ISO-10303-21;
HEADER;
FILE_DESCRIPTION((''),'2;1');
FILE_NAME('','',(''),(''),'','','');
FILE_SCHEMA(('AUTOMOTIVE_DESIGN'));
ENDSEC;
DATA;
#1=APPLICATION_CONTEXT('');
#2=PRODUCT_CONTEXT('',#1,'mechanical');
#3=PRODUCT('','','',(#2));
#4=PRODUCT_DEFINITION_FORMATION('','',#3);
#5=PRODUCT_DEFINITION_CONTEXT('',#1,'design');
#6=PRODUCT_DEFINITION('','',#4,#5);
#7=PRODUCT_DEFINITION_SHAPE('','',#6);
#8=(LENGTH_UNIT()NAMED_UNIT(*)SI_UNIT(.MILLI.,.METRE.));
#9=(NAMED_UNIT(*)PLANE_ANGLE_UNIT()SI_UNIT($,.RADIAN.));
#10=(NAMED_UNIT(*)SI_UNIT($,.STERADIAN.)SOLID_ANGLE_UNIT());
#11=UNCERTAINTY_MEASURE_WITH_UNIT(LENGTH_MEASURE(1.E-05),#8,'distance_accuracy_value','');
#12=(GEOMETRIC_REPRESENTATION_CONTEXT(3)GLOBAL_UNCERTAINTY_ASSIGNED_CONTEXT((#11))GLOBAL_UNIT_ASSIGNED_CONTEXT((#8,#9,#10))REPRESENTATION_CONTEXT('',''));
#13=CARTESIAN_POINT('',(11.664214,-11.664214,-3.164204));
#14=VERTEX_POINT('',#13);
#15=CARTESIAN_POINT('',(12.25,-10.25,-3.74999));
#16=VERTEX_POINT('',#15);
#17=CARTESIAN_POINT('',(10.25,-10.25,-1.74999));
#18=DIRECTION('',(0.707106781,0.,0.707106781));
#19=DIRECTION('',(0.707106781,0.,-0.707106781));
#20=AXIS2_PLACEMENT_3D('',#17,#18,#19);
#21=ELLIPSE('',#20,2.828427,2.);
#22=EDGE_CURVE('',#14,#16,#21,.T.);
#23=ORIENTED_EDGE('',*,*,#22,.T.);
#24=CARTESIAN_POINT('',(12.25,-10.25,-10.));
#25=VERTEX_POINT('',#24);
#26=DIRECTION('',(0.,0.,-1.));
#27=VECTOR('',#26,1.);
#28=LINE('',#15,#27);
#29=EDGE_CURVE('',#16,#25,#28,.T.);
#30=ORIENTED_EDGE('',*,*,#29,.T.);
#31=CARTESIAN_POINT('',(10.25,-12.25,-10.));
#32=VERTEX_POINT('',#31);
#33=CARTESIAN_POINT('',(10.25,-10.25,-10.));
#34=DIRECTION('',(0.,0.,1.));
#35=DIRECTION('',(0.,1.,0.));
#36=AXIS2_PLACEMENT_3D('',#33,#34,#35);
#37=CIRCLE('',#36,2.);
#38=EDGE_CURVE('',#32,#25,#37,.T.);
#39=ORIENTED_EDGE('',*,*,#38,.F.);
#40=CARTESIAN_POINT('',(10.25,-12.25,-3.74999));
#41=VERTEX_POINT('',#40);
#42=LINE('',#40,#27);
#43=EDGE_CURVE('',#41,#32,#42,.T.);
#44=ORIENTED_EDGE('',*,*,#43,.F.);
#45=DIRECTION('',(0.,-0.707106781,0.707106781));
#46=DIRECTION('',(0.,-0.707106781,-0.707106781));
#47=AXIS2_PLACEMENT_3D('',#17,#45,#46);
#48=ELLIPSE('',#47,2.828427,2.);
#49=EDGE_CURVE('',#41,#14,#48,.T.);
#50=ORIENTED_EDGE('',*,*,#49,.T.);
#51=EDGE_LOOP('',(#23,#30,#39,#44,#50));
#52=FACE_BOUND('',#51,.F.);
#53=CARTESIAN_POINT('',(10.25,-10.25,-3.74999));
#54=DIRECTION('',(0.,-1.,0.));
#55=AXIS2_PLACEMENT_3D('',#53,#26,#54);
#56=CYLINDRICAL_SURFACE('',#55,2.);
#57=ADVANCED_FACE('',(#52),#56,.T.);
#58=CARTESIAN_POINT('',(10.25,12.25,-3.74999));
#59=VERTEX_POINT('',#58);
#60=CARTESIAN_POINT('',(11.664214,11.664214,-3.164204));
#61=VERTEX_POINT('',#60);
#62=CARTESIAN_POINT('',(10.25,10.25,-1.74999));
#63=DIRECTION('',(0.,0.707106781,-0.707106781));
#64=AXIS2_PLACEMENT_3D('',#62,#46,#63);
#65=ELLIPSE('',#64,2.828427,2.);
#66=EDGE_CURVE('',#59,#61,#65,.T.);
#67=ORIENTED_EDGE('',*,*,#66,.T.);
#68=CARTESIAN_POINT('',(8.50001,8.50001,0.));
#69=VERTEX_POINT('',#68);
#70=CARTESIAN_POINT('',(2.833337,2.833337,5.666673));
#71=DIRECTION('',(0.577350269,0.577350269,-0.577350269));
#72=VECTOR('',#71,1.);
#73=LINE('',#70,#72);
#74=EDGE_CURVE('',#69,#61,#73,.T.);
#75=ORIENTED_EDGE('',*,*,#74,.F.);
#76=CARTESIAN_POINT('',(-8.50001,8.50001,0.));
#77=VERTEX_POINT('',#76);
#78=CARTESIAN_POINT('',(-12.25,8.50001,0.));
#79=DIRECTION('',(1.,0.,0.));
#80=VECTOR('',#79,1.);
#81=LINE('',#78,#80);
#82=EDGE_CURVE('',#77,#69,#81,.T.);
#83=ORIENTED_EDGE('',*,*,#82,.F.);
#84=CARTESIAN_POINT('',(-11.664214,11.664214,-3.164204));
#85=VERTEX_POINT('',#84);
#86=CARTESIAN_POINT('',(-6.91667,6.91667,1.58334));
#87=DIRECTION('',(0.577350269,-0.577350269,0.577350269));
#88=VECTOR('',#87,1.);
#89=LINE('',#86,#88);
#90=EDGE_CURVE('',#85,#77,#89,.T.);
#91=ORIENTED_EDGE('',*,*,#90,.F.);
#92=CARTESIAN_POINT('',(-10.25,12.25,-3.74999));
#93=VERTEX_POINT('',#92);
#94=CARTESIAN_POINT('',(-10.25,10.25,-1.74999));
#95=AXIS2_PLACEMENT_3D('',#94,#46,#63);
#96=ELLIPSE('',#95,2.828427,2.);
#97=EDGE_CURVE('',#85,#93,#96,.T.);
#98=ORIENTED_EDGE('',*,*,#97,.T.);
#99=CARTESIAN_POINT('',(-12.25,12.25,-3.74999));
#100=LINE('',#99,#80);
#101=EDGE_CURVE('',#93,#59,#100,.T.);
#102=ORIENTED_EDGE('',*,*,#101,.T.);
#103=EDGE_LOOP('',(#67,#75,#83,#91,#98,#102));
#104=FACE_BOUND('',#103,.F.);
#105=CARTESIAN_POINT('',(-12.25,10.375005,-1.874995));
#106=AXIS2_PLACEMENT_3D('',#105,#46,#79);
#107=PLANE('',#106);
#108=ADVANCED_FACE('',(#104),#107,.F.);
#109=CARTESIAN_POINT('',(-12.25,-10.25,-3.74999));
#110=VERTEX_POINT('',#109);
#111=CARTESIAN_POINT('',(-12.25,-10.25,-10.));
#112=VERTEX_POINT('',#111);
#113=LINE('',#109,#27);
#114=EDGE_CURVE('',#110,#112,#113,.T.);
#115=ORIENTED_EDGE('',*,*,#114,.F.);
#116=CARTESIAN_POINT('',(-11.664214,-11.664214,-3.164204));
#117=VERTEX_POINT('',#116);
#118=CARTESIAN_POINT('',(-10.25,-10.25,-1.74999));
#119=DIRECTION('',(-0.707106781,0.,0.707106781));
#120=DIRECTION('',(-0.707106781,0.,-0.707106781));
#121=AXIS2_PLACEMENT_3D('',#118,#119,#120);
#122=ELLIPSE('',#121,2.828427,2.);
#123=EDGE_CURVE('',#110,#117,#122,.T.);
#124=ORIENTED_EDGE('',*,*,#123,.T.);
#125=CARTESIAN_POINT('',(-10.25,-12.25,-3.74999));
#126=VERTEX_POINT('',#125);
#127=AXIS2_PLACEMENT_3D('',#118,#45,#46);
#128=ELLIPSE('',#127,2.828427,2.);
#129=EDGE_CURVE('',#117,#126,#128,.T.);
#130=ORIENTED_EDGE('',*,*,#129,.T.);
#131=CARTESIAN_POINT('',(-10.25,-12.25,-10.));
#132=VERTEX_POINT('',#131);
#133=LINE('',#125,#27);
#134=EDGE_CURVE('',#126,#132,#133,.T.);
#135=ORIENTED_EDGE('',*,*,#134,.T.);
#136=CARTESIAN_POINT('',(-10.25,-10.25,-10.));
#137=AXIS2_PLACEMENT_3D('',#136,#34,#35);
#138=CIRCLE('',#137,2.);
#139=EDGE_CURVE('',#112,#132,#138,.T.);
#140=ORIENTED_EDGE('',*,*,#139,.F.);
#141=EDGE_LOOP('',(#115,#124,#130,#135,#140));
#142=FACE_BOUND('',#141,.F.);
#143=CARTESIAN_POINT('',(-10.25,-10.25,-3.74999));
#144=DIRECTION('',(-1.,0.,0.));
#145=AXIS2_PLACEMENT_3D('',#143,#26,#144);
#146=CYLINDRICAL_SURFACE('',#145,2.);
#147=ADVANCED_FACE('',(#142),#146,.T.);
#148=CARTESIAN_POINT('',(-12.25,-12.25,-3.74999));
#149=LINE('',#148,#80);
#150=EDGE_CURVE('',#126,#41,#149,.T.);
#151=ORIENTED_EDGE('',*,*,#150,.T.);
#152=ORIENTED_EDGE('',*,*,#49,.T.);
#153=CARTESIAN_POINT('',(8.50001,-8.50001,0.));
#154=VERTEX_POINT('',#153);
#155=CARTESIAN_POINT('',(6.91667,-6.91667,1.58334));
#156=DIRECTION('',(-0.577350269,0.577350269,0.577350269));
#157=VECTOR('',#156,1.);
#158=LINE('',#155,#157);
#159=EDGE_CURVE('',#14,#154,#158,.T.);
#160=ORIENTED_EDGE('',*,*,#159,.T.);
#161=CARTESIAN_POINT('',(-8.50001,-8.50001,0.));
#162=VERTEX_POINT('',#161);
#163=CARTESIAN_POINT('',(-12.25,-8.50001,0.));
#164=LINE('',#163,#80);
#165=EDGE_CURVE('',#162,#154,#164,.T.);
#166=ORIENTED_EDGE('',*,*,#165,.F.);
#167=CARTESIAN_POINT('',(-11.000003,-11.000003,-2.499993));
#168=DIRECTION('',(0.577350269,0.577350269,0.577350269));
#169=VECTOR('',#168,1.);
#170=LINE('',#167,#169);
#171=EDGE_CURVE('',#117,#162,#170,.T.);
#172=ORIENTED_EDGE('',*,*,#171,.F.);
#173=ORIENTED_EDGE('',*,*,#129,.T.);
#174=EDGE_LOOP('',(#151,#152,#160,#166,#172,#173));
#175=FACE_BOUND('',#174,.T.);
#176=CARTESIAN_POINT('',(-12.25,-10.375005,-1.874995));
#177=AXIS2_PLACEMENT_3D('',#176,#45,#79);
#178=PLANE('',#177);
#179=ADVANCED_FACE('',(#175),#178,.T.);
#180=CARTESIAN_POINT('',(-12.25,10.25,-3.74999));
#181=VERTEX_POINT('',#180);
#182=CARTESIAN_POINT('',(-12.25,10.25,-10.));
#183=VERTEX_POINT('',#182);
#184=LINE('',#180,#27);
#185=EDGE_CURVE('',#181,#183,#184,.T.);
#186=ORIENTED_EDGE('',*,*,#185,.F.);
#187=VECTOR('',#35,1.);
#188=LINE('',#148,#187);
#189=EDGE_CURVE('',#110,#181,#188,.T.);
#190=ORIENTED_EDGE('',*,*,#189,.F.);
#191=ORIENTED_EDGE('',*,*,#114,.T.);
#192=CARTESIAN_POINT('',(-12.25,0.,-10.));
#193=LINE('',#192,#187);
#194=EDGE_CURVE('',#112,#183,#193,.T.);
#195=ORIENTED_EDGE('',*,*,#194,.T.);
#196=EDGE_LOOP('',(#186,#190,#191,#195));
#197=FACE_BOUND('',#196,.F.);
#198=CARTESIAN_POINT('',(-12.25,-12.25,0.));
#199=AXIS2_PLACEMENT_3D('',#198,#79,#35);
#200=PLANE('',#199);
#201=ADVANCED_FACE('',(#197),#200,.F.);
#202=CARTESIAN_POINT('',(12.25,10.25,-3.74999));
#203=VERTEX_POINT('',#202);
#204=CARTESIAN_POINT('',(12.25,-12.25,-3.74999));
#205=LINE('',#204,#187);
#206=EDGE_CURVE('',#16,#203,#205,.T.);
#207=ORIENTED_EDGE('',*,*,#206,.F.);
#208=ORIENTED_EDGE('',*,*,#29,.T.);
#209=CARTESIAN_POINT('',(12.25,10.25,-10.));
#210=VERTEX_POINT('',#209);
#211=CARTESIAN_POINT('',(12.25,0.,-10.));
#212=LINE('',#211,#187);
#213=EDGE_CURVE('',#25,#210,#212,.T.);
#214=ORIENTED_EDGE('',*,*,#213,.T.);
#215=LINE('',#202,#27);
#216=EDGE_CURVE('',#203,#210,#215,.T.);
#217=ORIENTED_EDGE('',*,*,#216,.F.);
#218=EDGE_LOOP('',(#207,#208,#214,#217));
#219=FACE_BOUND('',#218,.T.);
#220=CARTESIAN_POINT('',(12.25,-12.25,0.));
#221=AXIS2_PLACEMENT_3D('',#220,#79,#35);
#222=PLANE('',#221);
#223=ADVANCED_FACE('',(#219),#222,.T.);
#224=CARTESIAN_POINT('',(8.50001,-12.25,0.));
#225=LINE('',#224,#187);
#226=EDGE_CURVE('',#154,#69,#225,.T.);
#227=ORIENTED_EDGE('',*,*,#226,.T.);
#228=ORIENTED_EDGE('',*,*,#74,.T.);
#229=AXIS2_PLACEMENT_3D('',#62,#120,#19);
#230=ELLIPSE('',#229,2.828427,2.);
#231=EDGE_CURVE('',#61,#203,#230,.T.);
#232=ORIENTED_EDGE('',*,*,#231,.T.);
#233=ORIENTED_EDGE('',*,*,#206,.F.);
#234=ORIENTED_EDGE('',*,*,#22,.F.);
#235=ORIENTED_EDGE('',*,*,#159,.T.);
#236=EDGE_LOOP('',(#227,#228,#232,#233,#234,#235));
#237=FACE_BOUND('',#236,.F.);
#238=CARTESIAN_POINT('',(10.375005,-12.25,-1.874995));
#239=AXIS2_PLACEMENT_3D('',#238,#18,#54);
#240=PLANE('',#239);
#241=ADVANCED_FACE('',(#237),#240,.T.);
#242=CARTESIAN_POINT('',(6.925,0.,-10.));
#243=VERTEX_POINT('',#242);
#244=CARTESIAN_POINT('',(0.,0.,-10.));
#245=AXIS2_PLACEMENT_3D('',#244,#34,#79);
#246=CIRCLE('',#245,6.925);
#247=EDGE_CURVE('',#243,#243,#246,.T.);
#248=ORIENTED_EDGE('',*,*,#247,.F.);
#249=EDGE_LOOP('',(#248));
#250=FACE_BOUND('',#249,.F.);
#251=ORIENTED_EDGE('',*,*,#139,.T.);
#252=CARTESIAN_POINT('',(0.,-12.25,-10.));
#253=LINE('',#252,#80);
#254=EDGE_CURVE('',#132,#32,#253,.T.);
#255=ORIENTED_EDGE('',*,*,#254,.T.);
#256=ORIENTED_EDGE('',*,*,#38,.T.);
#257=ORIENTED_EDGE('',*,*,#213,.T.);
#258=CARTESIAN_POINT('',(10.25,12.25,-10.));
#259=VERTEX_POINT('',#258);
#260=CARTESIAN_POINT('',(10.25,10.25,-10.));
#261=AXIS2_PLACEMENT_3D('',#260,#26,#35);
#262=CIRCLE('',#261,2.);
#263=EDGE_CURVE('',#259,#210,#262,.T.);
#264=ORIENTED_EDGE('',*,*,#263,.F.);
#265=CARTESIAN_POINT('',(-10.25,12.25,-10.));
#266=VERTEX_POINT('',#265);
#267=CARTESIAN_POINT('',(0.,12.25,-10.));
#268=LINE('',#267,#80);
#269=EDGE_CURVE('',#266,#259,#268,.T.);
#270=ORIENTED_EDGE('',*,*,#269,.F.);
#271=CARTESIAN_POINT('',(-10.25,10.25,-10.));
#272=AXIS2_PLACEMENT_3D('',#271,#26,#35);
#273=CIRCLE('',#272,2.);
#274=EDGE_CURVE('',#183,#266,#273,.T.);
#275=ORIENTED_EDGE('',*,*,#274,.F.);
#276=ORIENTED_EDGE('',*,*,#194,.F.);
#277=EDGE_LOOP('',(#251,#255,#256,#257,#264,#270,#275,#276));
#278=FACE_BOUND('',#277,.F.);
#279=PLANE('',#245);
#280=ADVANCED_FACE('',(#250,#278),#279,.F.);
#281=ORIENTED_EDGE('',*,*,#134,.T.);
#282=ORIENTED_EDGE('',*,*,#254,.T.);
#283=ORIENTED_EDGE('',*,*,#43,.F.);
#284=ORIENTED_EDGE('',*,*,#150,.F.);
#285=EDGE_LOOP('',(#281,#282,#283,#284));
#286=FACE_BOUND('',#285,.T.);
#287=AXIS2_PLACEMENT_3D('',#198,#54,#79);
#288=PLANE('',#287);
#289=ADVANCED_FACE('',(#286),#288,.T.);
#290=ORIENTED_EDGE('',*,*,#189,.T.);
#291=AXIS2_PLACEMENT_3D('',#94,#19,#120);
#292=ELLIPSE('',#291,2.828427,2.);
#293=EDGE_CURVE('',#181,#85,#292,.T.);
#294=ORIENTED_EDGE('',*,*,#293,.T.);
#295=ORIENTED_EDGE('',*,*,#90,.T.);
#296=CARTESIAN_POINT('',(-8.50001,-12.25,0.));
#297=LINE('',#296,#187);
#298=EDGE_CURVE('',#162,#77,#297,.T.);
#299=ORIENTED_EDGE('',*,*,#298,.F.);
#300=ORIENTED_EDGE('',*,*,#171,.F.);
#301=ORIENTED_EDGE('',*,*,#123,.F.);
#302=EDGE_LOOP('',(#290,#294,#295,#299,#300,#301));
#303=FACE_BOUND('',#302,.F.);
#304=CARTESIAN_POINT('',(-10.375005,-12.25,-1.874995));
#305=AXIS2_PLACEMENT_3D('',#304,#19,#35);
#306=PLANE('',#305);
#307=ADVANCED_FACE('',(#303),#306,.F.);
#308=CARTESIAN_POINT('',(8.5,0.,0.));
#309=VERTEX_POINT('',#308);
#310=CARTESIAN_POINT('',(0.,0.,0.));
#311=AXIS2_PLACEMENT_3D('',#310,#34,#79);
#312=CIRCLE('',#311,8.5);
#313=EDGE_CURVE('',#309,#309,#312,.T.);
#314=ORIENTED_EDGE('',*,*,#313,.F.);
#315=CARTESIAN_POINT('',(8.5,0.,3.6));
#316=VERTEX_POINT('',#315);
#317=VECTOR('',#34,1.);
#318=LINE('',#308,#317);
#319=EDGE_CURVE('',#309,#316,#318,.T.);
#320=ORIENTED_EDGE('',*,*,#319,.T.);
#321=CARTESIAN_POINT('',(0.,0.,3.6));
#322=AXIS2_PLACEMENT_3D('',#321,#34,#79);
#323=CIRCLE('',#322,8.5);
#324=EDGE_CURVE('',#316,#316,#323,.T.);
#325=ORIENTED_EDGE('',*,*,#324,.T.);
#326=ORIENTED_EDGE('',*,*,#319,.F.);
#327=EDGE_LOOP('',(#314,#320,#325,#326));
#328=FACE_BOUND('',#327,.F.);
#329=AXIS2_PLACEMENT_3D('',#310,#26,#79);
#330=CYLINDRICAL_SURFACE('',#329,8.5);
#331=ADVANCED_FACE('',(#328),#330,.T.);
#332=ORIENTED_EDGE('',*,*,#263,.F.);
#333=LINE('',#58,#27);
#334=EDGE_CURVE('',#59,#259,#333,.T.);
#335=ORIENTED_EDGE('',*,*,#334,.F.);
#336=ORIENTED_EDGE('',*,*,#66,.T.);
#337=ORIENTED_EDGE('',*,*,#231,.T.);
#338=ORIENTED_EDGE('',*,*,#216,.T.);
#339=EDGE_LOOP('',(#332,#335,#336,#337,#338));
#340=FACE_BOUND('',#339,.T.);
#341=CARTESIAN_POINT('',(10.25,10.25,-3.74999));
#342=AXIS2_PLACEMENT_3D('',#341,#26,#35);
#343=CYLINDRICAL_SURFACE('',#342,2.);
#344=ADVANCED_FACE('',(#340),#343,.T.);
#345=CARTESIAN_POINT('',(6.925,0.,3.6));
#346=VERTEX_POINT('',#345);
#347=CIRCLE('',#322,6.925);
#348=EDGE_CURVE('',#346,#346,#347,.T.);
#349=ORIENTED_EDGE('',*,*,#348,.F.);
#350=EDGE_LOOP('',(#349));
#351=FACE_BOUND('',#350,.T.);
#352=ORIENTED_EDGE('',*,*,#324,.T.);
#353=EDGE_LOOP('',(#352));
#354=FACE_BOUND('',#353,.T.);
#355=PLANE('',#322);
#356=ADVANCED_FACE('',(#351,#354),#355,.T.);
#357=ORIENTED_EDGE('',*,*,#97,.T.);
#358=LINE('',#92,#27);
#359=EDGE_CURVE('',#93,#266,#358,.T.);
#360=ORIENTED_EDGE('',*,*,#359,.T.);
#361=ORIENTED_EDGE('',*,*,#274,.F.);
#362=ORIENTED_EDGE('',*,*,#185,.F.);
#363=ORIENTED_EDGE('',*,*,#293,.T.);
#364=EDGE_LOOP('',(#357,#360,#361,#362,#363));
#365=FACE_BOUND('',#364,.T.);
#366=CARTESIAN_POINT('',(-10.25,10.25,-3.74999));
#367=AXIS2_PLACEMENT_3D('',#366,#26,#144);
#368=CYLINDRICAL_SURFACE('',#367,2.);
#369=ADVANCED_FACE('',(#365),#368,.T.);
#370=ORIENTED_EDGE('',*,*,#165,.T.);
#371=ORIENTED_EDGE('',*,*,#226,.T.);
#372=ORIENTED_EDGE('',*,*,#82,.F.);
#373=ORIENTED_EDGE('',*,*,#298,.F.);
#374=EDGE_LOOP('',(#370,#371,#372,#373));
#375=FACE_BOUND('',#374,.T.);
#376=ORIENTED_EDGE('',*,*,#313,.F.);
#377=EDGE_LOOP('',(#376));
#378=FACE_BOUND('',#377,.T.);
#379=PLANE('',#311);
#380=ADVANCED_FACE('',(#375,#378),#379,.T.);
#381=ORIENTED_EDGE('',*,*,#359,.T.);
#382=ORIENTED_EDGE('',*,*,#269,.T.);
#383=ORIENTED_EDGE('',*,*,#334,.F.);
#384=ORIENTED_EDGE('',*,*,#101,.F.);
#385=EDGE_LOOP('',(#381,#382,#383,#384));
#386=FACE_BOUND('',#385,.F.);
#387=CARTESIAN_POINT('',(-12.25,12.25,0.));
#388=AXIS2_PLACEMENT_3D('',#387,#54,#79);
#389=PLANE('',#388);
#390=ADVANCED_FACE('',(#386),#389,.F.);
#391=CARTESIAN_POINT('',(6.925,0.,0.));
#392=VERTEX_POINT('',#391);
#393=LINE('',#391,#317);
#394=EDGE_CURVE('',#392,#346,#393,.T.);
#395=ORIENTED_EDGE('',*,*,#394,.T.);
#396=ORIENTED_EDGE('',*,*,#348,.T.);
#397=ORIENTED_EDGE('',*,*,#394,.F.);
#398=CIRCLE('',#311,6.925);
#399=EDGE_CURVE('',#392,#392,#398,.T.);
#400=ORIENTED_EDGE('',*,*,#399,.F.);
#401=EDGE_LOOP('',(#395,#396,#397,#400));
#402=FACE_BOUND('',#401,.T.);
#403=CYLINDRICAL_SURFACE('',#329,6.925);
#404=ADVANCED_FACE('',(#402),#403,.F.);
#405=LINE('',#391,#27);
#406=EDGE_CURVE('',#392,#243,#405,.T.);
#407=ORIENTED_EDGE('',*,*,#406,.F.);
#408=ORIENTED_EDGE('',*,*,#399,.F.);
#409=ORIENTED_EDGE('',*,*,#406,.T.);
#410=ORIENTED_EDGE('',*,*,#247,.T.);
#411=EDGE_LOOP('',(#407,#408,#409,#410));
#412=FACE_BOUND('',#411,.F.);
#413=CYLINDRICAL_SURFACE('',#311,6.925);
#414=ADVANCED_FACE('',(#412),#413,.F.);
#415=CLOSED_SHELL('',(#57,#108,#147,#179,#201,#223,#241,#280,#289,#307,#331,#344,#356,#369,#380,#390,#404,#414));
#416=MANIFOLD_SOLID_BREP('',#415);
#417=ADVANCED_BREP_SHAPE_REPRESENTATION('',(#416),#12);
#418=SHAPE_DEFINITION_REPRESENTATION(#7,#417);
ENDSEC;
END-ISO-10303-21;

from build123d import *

# Parameters (mm, degrees)
F0_W     = 24.5
F0_H     = 24.5
F0_R     = 8.5
F0_R_2   = 6.925
F1_DEPTH = 10
F2_DEPTH = 3.6
F3_DEPTH = 25
F4_SIZE2 = 3.74999
F4_SIZE  = 3.74999
F5_R     = 2


# Not quite as in the source:
# - a fillet or chamfer is up to 0.001 mm smaller than in the source, because OpenCascade refuses the exact size


with BuildPart() as f1:
    # F0 (on Top) → F1 (new body)
    with BuildSketch(Plane.XY):
        Rectangle(F0_W, F0_H)
        Circle(F0_R, mode=Mode.SUBTRACT)
        Circle(F0_R)
        Circle(F0_R_2, mode=Mode.SUBTRACT)
        Circle(F0_R_2)
    extrude(amount=-F1_DEPTH)

    # F0 (on Top) → F2 (join)
    with BuildSketch(Plane.XY):
        Circle(F0_R)
        Circle(F0_R_2, mode=Mode.SUBTRACT)
    extrude(amount=F2_DEPTH)

    # F0 (on Top) → F3 (cut)
    with BuildSketch(Plane.XY):
        Circle(F0_R_2)
    extrude(amount=-F3_DEPTH, mode=Mode.SUBTRACT)

    # F4 (size 3.75 and 3.75 in the source; OpenCascade refuses exactly that, so slightly less here)
    f4_edges = [f1.edges().sort_by_distance(p)[0] for p in [
        (0, -12.25, 0),
        (12.25, 0, 0),
        (0, 12.25, 0),
        (-12.25, 0, 0),
    ]]
    chamfer(f4_edges, length=F4_SIZE, length2=F4_SIZE2)

    # F5
    f5_edges = [f1.edges().sort_by_distance(p)[0] for p in [
        (12.25, -12.25, -6.874995),
        (12.25, 12.25, -6.874995),
        (-12.25, 12.25, -6.874995),
        (-12.25, -12.25, -6.874995),
    ]]
    fillet(f5_edges, radius=F5_R)


solid = f1.part
